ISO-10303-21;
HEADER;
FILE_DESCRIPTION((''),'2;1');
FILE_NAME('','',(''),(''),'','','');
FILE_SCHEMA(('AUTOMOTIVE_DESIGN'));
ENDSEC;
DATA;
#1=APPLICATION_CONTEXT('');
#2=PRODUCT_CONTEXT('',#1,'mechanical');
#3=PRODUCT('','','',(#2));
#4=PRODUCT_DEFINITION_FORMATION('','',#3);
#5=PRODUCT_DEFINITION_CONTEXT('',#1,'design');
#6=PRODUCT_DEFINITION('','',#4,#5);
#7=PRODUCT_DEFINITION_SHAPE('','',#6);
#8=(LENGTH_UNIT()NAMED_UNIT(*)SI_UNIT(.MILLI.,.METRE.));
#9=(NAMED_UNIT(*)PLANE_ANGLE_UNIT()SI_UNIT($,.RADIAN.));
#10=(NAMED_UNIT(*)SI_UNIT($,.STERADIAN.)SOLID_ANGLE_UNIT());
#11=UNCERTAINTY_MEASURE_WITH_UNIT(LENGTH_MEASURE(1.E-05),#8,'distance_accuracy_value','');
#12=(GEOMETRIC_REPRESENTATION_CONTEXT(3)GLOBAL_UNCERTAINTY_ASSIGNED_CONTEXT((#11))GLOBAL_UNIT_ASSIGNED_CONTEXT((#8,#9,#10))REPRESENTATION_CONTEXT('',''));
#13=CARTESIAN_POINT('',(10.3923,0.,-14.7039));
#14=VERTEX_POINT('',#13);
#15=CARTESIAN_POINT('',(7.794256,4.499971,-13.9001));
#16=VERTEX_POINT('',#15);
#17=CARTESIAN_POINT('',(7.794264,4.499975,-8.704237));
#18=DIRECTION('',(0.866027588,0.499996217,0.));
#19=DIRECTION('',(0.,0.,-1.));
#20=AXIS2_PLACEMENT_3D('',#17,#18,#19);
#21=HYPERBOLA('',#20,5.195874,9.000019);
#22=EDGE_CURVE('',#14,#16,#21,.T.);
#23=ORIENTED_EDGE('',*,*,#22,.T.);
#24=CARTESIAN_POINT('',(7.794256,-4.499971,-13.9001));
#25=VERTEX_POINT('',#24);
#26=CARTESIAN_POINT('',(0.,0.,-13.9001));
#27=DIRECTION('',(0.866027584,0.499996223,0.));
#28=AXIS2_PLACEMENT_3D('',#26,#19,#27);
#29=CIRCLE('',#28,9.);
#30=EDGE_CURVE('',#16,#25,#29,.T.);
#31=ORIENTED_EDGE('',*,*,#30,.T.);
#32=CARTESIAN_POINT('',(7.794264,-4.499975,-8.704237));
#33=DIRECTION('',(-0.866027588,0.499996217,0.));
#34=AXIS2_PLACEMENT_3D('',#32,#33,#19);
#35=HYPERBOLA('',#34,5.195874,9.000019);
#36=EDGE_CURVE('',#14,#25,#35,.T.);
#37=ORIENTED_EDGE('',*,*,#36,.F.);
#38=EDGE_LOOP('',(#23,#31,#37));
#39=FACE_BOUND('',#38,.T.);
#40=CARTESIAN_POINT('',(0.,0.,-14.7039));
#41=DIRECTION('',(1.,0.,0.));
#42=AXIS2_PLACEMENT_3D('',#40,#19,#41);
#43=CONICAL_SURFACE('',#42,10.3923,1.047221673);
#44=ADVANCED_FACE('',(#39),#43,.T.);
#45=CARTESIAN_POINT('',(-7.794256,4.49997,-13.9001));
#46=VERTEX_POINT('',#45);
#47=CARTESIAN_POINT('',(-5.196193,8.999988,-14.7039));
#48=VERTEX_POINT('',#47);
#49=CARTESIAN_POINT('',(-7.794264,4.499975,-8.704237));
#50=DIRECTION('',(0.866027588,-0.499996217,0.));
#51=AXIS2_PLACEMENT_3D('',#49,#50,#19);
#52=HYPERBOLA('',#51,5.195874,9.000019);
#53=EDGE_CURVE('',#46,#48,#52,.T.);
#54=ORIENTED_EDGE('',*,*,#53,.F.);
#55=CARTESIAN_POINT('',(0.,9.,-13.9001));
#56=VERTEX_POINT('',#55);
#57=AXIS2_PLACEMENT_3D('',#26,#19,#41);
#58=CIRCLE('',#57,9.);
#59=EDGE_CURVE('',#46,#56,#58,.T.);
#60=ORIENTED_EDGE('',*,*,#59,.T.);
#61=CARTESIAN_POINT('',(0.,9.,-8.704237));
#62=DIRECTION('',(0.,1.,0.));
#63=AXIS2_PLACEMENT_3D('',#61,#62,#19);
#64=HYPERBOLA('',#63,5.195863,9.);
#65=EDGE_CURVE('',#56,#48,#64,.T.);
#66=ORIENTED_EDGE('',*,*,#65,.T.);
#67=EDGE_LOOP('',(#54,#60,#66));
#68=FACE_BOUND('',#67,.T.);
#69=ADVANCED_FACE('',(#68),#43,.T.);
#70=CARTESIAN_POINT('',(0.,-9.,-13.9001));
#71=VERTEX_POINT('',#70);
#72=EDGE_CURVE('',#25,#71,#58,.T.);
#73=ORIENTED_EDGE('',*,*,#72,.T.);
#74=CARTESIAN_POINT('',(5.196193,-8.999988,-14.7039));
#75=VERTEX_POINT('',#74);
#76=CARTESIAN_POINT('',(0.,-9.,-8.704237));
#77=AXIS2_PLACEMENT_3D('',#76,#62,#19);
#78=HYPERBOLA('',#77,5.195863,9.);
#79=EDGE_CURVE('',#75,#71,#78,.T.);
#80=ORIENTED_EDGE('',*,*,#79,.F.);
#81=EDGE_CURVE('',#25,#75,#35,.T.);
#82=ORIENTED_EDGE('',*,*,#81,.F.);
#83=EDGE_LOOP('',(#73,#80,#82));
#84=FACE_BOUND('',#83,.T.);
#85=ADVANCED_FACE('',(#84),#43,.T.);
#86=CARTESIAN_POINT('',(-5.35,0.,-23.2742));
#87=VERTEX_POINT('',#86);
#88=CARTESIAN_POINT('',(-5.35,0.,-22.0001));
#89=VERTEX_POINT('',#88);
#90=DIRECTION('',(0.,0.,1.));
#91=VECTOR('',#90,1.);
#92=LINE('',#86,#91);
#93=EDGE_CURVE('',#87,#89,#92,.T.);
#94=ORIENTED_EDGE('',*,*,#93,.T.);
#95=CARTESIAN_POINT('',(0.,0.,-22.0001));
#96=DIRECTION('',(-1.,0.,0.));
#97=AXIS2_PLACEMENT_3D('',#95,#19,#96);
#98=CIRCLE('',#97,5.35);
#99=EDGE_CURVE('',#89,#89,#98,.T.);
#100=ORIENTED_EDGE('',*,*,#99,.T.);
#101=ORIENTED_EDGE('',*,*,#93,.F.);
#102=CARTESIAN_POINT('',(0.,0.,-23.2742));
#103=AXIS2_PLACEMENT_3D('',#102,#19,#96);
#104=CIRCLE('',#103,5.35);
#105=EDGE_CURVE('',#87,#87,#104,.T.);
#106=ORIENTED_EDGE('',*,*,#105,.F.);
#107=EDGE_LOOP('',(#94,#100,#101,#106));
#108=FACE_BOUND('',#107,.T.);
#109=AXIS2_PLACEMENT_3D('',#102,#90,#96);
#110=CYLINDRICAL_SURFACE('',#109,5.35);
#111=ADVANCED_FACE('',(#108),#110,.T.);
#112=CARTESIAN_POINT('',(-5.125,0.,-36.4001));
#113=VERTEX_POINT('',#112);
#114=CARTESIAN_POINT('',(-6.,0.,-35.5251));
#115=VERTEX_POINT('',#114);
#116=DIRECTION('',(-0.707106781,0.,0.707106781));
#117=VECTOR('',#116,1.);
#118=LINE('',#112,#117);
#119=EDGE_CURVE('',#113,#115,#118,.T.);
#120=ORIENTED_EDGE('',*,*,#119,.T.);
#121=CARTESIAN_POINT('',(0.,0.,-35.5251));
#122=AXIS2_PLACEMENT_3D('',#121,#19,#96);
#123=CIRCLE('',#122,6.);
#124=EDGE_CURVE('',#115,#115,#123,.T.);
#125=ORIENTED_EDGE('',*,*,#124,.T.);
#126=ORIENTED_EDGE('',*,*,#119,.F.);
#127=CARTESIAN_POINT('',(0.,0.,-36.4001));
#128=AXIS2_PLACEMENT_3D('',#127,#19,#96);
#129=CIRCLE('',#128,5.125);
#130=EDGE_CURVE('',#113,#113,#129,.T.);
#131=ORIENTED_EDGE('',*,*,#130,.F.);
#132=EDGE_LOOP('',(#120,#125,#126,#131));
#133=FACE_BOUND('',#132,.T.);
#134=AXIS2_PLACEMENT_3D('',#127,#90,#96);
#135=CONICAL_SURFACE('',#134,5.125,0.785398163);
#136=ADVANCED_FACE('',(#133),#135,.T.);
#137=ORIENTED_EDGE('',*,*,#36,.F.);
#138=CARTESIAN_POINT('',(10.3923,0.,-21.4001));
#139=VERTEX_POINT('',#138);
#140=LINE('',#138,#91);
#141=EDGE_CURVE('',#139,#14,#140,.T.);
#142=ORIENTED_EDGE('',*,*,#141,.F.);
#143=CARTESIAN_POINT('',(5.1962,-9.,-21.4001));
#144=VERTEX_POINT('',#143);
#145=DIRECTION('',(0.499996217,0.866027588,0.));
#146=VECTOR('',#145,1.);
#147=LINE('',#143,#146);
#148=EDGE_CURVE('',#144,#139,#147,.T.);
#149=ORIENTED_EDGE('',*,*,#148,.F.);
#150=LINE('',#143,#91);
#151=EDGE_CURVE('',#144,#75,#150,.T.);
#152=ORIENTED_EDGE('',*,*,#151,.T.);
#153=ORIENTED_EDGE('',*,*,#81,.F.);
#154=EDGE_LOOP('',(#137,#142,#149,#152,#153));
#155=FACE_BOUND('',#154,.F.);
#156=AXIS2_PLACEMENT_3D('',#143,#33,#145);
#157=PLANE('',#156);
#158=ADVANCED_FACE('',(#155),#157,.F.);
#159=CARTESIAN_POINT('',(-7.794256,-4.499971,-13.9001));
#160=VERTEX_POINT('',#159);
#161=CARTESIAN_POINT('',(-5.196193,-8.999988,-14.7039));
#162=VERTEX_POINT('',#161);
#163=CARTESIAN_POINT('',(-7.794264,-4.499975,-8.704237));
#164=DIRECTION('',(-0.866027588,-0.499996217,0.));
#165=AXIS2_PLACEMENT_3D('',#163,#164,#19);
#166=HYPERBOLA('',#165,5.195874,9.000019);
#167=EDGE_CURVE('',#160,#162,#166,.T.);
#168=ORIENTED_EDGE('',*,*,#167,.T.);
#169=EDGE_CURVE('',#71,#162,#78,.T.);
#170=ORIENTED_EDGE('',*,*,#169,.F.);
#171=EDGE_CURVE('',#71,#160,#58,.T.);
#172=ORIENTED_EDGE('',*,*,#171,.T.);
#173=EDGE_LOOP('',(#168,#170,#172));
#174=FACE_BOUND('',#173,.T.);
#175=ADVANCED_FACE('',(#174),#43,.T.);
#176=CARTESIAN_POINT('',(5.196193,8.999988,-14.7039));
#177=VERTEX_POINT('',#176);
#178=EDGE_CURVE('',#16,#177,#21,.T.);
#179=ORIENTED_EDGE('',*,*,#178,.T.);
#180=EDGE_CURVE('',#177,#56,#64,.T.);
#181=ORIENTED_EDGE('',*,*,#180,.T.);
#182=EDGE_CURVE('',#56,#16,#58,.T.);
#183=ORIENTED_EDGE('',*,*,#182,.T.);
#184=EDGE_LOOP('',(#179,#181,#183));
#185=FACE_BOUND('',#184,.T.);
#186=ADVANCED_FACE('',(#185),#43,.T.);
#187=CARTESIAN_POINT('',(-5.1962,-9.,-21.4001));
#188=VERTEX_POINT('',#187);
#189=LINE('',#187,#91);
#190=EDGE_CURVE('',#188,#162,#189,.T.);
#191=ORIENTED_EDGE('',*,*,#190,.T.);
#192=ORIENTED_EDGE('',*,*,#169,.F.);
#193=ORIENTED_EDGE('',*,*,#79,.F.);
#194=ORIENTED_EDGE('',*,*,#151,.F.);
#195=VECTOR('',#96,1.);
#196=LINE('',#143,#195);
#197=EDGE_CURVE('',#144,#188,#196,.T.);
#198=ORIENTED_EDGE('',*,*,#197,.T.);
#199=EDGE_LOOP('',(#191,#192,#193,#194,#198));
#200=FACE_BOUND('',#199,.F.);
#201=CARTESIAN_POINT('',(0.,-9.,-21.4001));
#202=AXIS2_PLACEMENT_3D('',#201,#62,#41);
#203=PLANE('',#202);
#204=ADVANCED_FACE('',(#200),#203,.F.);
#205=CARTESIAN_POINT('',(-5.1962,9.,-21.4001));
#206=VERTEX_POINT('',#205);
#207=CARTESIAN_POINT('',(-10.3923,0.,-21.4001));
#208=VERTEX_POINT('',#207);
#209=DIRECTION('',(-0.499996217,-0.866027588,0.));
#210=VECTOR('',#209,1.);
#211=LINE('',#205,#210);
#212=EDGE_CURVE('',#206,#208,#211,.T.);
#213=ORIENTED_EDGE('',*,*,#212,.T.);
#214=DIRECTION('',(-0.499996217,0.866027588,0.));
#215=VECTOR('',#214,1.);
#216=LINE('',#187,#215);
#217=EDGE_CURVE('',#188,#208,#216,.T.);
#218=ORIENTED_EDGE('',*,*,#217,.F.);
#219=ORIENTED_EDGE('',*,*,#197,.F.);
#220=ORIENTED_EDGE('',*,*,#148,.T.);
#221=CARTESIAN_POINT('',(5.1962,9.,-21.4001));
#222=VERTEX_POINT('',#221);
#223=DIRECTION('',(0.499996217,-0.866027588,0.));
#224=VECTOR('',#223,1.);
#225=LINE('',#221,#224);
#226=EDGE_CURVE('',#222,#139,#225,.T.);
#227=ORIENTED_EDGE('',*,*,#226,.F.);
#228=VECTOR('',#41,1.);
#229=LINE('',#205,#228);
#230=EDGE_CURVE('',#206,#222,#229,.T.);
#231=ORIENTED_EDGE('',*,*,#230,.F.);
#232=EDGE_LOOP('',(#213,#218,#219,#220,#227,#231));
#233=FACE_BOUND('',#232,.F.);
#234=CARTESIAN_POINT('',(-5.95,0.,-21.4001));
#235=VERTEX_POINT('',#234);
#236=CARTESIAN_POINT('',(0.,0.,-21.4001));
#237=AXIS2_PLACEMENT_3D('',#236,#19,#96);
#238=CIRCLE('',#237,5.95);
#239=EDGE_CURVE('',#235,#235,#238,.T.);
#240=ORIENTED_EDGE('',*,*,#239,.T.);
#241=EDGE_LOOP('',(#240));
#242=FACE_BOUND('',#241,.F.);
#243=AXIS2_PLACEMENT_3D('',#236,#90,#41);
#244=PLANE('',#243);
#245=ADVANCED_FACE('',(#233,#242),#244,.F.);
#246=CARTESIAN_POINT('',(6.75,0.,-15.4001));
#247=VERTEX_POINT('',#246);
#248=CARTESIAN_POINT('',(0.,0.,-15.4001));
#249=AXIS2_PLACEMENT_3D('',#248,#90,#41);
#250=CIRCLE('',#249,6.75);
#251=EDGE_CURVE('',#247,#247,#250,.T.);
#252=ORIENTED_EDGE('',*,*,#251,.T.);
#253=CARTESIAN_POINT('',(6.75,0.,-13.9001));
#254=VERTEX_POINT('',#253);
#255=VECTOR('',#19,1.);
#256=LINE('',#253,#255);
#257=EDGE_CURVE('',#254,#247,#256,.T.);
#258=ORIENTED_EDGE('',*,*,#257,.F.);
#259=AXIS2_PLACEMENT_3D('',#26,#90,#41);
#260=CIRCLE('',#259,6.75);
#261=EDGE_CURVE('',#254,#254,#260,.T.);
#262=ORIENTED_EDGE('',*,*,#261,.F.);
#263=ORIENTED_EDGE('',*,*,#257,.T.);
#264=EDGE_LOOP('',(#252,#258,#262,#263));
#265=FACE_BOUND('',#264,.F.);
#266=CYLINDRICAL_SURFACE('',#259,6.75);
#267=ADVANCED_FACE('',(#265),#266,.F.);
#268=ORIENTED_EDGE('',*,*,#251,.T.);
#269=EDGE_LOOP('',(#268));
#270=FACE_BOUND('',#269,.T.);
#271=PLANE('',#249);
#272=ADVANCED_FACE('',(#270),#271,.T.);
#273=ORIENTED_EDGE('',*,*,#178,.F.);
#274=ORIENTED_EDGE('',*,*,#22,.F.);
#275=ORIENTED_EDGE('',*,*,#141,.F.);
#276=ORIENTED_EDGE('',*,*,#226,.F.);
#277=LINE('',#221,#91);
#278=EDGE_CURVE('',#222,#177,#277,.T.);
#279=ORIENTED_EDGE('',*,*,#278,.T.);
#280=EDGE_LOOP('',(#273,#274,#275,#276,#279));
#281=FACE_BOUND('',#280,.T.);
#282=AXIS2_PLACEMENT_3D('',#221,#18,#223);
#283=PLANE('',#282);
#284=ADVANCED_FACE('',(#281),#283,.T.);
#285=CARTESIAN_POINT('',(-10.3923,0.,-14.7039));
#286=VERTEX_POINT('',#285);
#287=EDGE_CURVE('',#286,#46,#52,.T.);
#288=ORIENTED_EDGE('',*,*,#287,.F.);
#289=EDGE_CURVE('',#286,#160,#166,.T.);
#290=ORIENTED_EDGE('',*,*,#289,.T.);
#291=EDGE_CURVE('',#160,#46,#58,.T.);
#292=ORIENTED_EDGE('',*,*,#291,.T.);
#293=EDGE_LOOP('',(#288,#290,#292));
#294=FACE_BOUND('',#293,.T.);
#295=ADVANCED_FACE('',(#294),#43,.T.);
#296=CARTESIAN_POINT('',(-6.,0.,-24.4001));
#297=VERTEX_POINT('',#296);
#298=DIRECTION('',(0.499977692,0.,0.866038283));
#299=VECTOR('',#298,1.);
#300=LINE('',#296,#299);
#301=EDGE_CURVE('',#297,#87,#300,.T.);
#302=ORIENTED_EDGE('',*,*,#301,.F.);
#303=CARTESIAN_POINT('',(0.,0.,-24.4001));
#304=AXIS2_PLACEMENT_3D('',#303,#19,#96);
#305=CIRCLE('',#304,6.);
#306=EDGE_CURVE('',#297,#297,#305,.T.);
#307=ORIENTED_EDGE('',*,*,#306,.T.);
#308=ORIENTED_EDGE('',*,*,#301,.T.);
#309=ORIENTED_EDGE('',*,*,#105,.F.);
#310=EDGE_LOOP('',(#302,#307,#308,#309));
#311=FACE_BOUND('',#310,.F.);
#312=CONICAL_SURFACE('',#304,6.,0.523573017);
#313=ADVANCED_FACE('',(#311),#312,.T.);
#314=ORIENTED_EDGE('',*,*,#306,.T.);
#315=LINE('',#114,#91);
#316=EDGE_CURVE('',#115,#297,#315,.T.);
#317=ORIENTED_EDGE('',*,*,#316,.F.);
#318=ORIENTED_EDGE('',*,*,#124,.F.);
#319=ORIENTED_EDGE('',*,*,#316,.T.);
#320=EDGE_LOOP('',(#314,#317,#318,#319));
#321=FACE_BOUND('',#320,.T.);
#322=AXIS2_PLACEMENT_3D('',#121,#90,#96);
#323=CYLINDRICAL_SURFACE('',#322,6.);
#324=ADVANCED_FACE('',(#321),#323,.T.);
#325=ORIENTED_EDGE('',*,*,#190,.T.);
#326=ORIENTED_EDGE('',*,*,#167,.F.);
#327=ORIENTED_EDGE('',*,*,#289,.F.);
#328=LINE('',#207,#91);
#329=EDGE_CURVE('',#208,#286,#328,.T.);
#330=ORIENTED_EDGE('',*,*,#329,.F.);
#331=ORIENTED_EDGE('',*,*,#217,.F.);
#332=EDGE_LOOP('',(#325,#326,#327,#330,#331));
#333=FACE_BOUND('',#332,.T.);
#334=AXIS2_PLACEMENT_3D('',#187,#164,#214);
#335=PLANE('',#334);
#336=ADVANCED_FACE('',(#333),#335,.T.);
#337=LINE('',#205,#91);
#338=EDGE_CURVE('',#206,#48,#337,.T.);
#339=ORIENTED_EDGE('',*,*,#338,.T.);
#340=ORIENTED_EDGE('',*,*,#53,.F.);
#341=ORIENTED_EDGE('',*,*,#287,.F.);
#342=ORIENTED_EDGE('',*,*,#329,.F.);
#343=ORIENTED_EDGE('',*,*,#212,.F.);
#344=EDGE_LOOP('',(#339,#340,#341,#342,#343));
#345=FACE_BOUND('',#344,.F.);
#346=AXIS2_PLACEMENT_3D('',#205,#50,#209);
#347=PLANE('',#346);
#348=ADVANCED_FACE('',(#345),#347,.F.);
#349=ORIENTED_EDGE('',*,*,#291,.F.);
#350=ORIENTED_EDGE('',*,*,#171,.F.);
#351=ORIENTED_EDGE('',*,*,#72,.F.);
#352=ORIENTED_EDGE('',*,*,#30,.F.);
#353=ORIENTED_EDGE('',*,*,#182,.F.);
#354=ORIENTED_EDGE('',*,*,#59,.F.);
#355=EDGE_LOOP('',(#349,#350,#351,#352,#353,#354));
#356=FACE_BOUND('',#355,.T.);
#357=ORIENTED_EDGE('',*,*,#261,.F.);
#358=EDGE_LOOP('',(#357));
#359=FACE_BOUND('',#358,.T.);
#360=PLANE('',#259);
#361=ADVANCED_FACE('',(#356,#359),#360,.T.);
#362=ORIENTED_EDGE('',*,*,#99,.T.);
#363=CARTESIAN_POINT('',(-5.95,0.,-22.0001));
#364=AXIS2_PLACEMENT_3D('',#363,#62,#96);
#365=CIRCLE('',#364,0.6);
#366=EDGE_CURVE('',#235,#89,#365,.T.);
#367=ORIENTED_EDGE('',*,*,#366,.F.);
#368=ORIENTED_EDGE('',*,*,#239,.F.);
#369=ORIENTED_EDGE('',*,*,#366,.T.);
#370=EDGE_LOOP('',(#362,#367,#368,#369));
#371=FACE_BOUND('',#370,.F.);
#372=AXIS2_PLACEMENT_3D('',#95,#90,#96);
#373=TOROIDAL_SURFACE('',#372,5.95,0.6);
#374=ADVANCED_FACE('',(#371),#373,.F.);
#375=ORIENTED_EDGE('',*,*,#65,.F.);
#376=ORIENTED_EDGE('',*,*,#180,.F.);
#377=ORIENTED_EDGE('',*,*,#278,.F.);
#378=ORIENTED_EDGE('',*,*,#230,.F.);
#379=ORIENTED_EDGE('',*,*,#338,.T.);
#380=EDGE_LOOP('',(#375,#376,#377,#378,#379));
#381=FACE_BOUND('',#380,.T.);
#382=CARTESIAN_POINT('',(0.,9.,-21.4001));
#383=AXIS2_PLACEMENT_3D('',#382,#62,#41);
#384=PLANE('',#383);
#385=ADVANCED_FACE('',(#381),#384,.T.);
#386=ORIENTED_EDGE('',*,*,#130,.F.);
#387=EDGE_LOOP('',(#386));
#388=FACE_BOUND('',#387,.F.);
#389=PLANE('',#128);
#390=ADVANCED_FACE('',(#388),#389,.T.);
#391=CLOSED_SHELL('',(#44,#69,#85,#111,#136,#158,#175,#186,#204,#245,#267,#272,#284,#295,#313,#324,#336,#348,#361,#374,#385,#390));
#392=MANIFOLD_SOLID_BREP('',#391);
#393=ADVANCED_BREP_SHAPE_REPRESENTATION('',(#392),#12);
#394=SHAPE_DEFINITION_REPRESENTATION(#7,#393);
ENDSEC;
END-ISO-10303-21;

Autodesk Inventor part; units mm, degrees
ref_plane "YZ Plane" through (0, 0, 0) normal (1, 0, 0) x (0, 1, 0)
sketch "Sketch2" plane through (0, 0, 0) normal (0, 1, 0) x (-1, 0, 0)
  line L0 (0, -21.4001) -> (0, -36.4001)
  line L1 (0, -36.4001) -> (5.125, -36.4001)
  line L2 (6, -35.5251) -> (6, -24.4001)
  line L3 (6, -24.4001) -> (5.35, -23.2742)
  line L4 (5.35, -23.2742) -> (5.35, -21.4001)
  line L5 (5.35, -21.4001) -> (0, -21.4001)
  line L6 (5.125, -36.4001) -> (6, -35.5251)
  line L7 (6, -36.4001) -> (6, -37.6375)
  line L8 (0, -40.885) -> (0, -18.1526) projected
  dimension "Ds" = 10.7
  dimension "NND" = 12
  dimension "b" = 12
  dimension "d3" = 30
  dimension "d5" = 45
  dimension "PTC" = 1.75
  dimension "NLG" = 15
revolve "Revolution1" add sketch "Sketch2" angle 360 about axis through (0, 0, -21.4001) along (0, 0, -1)
sketch "Sketch3" plane through (0, 0, -21.4001) normal (0, 0, 1) x (1, 0, 0)
  circle A0 centre (0, 0) radius 5.35 projected
  line L0 (0, 9) -> (5.1962, 9)
  line L1 (5.1962, 9) -> (10.3923, 0)
  line L2 (10.3923, 0) -> (0, 0)
  line L3 (0, 0) -> (0, 9)
  line L4 (0, 9) -> (-5.1962, 9)
  line L5 (-5.1962, 9) -> (-10.3923, 0)
  line L6 (0, -9) -> (5.1962, -9)
  line L7 (5.1962, -9) -> (10.3923, 0)
  line L8 (-5.1962, -9) -> (-10.3923, 0)
  line L9 (0, -9) -> (-5.1962, -9)
  dimension "d9" = 60
  dimension "ParS" = 18
  dimension "msp_d11" = 18
extrude "Extrusion1" add sketch "Sketch3" along normal blind 7.5
sketch "Sketch4" plane through (0, 0, 0) normal (0, 1, 0) x (-1, 0, 0)
  line L0 (-9, -13.9001) -> (-10.3923, -13.9001)
  line L1 (-10.3923, -13.9001) -> (-10.3923, -14.7039)
  line L2 (-10.3923, -14.7039) -> (-9, -13.9001)
  line L3 (0, -25.2766) -> (0, 36.8591) projected
  line L4 (0, 27.9826) -> (0, 27.1787)
  line L5 (-10.3923, -21.4001) -> (-10.3923, -13.9001) projected
  line L6 (-5.1962, -13.9001) -> (-10.3923, -13.9001) projected
  dimension "d14" = 30
  dimension "msp_d15" = 18
revolve "Revolution2" cut sketch "Sketch4" angle 360 about axis through (0, 0, 27.9826) along (0, 0, -1)
sketch "Sketch5" plane through (0, 0, -13.9001) normal (0, 0, 1) x (1, 0, 0)
  arc A0 (7.7942, 4.5) -> (0, 9) centre (0, 0) ccw projected
  circle A1 centre (0, 0) radius 6.75
  dimension "d27" = 13.5
extrude "Extrusion2" cut sketch "Sketch5" against normal blind 1.5
thread "Thread1" size "M12x1.75" class "6g" standard "ISO Metric profile" full length
ref_plane "MSC_PF1" through (0, 0, 0) normal (0, 1, 0) x (-1, 0, 0)
ref_plane "MSC_PT1" through (0, 0, -21.4001) normal (0, 0, -1) x (-1, 0, 0)
fillet "Fillet1" radius 0.6 1 edges at (5.35, 0, -21.4001)
equation "\"msp_d11\" = ParS"
equation "\"msp_d15\" = ParS"
equation "\"d27\" = 0.75 * ParS"
equation "\"d28\" = 0.2 * ParK"
equation "\"d30\" = r"
equation "\"msp_d17\" = b"
equation "\"r\" = 0.6"
equation "\"THREADDIA\" = NND"
equation "\"ParK\" = 7.5"
properties part number "ISO 4015 - M12 x 45" material "Stainless Steel, 440C"
